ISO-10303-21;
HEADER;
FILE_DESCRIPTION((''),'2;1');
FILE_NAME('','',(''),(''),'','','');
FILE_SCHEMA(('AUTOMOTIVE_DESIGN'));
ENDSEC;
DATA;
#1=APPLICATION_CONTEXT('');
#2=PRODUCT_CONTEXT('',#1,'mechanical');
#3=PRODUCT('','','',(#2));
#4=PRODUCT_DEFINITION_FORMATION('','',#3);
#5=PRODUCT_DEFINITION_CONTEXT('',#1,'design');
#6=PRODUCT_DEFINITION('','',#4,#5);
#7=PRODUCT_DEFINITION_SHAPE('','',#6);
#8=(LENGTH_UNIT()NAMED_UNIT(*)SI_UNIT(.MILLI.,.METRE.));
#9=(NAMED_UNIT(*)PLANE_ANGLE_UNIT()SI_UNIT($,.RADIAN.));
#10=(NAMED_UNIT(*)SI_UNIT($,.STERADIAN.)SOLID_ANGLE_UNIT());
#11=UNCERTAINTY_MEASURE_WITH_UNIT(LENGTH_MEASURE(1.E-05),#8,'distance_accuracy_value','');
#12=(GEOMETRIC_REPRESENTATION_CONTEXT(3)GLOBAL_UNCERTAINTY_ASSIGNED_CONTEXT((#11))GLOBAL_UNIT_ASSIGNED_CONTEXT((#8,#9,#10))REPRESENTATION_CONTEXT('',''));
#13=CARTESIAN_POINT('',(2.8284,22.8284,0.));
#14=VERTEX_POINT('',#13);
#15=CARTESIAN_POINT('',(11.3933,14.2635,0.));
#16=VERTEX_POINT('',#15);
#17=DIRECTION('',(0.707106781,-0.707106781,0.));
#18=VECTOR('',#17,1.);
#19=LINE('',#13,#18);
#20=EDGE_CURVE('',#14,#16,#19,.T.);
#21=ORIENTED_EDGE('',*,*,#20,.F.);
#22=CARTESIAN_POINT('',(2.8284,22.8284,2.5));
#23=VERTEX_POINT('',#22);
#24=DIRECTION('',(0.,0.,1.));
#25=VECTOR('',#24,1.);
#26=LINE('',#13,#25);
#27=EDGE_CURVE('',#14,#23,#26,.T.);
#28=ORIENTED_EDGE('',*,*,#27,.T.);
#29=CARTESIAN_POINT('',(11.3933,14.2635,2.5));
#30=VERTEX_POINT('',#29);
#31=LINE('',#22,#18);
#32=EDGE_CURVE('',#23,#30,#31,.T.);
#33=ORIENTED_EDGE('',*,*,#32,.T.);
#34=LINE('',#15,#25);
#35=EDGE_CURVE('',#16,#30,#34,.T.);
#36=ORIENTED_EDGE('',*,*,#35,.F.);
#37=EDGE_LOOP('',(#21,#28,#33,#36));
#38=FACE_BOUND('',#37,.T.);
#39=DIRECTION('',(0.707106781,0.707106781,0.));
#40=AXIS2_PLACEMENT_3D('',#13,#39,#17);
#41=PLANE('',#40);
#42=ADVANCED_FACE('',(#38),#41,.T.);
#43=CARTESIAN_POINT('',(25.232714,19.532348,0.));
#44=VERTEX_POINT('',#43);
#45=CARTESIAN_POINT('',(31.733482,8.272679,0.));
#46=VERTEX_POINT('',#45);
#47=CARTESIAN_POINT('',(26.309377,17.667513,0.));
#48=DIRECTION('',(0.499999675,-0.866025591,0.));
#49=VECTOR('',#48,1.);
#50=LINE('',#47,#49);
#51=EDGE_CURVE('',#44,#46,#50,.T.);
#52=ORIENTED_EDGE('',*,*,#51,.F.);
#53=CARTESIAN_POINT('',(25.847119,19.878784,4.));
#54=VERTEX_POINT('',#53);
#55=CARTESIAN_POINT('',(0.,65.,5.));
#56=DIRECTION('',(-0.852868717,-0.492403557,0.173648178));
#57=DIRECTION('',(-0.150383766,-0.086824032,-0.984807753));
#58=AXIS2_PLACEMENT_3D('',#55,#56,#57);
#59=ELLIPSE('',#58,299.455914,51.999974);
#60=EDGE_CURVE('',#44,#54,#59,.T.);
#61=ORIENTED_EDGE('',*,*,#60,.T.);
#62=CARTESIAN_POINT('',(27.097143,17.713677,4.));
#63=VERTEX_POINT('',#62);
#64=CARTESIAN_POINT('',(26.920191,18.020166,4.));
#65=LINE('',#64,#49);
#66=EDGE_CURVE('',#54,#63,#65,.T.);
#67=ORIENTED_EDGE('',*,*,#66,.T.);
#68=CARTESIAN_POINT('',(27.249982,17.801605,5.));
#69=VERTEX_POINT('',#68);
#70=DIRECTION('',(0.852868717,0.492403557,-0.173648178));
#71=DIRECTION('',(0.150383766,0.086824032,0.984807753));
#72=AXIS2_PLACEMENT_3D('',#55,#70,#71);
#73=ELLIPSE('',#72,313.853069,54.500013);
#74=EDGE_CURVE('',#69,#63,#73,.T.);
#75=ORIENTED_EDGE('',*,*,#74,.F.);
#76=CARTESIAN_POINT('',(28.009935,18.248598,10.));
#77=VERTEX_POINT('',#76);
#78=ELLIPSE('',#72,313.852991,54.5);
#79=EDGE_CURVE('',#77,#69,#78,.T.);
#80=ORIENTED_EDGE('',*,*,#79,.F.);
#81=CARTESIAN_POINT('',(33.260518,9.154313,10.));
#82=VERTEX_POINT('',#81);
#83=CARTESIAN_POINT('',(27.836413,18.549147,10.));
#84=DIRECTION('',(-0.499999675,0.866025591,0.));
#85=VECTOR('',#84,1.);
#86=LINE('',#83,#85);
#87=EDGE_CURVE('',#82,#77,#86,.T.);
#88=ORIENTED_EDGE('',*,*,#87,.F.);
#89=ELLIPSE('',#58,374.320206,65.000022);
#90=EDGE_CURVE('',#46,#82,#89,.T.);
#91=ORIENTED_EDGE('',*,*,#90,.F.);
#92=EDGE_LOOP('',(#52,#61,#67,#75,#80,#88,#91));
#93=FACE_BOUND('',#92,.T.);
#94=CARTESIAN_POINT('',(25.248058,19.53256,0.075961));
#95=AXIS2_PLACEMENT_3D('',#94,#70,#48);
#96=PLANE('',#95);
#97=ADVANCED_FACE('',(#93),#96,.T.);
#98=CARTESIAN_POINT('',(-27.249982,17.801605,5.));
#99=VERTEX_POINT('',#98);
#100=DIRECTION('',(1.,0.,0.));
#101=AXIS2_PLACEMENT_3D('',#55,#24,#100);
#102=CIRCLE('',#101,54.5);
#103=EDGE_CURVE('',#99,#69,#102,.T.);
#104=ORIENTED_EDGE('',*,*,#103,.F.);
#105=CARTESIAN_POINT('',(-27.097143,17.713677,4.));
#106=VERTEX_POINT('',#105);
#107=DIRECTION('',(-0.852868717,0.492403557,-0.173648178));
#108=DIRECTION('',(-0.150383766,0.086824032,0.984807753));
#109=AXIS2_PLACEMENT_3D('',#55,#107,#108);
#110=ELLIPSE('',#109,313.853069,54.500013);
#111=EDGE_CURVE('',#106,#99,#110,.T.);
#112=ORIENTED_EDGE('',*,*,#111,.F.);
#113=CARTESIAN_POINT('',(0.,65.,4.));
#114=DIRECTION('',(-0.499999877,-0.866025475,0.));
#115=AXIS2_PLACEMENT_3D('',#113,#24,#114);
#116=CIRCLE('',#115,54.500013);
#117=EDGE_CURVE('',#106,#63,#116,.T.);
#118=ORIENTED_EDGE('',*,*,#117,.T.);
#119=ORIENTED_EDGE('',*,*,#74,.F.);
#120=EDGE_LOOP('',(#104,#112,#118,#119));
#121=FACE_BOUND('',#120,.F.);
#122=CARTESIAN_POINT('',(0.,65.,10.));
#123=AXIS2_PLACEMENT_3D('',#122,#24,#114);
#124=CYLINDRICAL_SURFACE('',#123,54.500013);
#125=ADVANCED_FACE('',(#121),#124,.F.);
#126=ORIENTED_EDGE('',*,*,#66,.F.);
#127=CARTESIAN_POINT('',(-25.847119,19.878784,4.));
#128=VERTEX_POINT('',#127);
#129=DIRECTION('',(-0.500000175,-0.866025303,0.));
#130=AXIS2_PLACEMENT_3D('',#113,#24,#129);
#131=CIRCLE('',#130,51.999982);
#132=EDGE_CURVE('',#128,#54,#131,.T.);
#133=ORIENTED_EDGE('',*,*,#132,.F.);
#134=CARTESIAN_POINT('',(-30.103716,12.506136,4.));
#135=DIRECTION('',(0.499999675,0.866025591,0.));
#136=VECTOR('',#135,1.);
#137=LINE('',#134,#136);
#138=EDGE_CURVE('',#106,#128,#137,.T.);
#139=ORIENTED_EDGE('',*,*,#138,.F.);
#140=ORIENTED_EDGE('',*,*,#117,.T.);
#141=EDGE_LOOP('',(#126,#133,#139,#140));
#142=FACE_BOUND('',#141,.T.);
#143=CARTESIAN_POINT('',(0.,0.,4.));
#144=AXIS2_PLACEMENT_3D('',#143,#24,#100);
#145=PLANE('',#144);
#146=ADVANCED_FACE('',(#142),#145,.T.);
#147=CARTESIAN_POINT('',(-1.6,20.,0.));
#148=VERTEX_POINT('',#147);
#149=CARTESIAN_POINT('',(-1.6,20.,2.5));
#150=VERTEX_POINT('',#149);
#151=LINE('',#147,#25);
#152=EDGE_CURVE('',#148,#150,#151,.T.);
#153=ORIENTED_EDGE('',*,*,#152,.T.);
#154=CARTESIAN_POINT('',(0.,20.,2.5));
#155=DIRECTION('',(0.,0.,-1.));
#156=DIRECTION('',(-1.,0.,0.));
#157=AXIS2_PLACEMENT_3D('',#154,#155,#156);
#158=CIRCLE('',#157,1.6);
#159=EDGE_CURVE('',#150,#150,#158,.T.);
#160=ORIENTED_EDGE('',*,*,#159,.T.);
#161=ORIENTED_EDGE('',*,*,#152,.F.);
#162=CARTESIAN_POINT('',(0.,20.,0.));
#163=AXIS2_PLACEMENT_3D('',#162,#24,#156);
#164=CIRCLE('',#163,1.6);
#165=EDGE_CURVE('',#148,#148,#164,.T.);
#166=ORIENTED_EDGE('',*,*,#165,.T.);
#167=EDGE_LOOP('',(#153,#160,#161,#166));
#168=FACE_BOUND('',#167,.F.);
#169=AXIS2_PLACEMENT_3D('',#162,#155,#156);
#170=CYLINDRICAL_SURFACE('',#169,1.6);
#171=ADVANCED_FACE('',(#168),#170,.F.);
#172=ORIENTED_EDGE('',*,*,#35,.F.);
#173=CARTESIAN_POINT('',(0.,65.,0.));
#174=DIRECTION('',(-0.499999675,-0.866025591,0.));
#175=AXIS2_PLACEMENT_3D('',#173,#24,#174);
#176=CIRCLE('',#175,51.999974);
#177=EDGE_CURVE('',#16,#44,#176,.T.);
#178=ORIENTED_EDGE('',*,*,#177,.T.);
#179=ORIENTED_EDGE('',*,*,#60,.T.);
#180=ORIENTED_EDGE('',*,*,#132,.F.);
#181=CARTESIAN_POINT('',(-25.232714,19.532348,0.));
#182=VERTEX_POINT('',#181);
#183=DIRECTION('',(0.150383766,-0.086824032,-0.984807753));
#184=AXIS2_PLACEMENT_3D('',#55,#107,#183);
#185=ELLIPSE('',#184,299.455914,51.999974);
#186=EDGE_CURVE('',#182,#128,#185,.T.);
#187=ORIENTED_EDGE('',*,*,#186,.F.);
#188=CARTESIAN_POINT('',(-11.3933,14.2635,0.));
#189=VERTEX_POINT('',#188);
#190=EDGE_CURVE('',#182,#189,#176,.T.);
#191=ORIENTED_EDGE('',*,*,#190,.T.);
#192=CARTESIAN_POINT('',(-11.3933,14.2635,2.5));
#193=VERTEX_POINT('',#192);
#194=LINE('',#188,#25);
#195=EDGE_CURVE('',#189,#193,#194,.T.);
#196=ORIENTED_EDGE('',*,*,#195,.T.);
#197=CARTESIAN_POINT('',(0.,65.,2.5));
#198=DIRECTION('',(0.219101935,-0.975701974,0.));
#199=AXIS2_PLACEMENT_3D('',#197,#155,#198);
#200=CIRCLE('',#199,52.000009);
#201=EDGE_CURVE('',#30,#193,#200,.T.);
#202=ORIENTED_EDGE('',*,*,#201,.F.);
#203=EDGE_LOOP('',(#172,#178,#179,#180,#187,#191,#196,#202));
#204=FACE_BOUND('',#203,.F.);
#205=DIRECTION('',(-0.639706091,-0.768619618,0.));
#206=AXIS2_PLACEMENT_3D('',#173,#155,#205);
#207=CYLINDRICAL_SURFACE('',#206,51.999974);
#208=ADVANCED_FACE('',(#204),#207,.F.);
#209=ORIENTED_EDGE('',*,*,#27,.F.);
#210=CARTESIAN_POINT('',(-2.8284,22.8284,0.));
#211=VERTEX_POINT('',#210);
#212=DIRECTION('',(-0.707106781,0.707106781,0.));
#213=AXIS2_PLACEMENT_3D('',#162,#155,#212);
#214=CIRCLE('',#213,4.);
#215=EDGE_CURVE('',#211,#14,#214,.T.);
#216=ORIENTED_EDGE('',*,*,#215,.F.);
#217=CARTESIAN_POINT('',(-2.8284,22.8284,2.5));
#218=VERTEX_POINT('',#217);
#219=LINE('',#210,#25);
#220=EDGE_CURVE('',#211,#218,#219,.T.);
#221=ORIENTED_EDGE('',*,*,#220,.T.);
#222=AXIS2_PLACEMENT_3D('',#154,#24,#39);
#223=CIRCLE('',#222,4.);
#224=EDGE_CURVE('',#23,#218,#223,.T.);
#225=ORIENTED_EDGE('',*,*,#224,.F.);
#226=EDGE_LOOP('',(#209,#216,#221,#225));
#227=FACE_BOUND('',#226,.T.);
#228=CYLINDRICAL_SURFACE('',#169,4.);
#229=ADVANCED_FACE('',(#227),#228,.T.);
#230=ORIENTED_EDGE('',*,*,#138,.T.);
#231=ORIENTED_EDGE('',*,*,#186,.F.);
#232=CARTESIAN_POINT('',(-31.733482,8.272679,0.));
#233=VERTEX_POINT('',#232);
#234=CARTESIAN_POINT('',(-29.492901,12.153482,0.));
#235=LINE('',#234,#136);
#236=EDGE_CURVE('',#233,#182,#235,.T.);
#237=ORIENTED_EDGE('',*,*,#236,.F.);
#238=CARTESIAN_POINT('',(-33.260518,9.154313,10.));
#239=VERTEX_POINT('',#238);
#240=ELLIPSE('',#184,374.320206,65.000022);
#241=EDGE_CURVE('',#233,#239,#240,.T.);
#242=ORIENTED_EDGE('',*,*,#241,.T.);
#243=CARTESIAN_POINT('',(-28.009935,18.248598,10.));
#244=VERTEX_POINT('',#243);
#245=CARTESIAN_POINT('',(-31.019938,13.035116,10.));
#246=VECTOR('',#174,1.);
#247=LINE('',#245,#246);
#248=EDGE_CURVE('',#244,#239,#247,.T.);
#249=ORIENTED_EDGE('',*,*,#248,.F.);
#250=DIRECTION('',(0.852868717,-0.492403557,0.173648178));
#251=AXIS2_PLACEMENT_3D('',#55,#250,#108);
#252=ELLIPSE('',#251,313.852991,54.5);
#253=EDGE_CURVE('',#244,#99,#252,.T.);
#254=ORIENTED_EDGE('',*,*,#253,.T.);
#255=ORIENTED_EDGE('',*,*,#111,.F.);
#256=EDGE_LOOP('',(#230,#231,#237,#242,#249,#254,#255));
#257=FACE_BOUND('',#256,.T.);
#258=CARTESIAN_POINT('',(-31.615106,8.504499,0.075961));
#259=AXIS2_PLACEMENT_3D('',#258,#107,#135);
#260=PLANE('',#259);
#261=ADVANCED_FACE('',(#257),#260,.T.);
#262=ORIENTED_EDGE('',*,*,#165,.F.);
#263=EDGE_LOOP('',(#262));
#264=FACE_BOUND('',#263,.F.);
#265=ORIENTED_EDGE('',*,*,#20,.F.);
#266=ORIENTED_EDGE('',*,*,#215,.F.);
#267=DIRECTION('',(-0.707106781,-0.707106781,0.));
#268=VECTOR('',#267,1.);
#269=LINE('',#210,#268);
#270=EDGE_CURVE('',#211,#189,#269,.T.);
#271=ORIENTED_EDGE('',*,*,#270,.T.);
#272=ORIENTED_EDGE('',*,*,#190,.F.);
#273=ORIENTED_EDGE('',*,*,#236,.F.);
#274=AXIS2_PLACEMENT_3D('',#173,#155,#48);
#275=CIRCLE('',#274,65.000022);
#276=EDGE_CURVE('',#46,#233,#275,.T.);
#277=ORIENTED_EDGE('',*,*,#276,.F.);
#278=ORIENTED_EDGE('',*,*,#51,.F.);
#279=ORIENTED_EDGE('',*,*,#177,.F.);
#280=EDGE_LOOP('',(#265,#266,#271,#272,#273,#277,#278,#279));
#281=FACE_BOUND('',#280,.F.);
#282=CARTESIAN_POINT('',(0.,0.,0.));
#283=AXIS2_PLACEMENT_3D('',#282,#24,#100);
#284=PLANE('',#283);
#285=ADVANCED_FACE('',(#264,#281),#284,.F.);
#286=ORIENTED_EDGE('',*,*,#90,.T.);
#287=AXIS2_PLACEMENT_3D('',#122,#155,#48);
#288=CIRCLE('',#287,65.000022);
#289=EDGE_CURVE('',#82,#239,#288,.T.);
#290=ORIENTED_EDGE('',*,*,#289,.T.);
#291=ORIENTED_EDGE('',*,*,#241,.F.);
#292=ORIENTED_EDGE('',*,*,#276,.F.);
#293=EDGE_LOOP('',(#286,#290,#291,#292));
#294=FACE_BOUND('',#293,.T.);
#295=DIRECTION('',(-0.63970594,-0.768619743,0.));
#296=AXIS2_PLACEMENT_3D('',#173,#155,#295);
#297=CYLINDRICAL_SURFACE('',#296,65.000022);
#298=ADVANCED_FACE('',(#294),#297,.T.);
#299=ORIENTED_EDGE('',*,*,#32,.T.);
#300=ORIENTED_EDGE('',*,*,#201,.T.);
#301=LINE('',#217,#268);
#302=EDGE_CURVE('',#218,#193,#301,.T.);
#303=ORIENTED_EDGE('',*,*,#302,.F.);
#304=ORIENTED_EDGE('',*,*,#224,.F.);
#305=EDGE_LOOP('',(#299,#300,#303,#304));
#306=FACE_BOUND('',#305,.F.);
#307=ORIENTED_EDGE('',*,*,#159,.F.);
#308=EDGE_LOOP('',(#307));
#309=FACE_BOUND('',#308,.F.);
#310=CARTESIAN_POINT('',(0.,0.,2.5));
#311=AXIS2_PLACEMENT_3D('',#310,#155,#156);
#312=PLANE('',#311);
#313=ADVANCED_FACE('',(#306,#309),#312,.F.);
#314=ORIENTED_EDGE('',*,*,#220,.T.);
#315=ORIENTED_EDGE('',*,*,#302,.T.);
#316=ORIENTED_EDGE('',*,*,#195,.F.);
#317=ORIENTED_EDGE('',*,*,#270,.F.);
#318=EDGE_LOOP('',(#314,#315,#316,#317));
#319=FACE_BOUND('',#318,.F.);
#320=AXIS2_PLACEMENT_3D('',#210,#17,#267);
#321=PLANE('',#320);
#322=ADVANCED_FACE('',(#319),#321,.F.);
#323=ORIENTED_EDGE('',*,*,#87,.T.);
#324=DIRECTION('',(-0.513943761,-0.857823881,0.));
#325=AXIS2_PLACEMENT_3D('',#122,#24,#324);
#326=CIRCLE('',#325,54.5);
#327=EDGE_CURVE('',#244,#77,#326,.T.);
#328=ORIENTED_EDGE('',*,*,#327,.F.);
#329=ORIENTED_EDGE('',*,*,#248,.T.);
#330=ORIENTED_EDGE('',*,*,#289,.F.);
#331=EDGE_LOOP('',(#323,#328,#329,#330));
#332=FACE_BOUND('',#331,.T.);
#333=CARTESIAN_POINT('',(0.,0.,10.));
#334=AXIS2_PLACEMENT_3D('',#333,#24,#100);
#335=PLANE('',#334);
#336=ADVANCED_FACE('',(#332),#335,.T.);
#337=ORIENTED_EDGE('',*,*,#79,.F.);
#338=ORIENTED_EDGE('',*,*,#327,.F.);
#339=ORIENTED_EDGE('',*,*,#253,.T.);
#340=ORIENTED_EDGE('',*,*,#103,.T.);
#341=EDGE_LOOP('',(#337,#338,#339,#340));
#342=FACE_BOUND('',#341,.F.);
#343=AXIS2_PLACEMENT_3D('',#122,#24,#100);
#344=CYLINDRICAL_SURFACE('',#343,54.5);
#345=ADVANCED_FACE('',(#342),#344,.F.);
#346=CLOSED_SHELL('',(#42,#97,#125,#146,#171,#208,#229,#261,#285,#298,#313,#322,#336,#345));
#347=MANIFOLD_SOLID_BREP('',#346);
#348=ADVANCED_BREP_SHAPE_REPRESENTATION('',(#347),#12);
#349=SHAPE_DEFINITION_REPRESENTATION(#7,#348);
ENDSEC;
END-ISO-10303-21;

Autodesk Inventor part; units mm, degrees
ref_plane "YZ Plane" through (0, 0, 0) normal (1, 0, 0) x (0, 1, 0)
ref_plane "XZ Plane" through (0, 0, 0) normal (0, 1, 0) x (-1, 0, 0)
ref_plane "XY Plane" through (0, 0, 0) normal (0, 0, 1) x (1, 0, 0)
sketch "Эскиз1" plane through (0, 0, 0) normal (0, 0, 1) x (1, 0, 0)
  line L0 (-19.4221, 3.2482) -> (-17.0252, 13.9839) projected
  line L1 (17.0252, 13.9839) -> (19.4221, 3.2482) projected
  arc A0 (-41.5809, 15.0397) -> (41.5809, 15.0397) centre (0, 65) ccw projected
  line L2 (41.5809, 15.0397) -> (33.2647, 25.0318) projected
  arc A1 (-33.2647, 25.0318) -> (33.2647, 25.0318) centre (0, 65) ccw projected
  line L3 (-33.2647, 25.0318) -> (-41.5809, 15.0397) projected
  line L4 (-5.5, 11.5) -> (-5.5, 0.5) projected
  line L5 (5.5, 0.5) -> (5.5, 11.5) projected
  circle A2 centre (0, 65) radius 65
  circle A3 centre (0, 65) radius 52
  line L6 (-41.5809, 15.0397) -> (-33.2647, 25.0318)
  line L7 (20.5764, 3.3428) -> (0, 65)
  line L8 (-41.5809, 15.0397) -> (0, 65)
  line L9 (0, 65) -> (21.1137, 3.5247)
  line L10 (-32.5, 8.7083) -> (0, 65)
  line L11 (0, 65) -> (32.5, 8.7083)
  line L12 (0, 65) -> (0, 0)
  arc A4 (-39.7976, 13.9446) -> (-45.7382, 14.0977) centre (-42.8715, 10.0011) ccw projected
  line L13 (-45.7382, 14.0977) -> (-66.813, -0.6503) projected
  line L14 (-66.813, -0.6503) -> (-66.8135, -2.4814) projected
  line L15 (-66.8135, -2.4814) -> (-61.8135, -2.4828) projected
  line L16 (-61.8135, -2.4828) -> (-61.8127, 0.4976) projected
  arc A5 (-61.386, 1.3167) -> (-61.8127, 0.4976) centre (-60.8127, 0.4974) ccw projected
  line L17 (-61.386, 1.3167) -> (-46.2094, 11.9372) projected
  arc A6 (-40.3216, 11.8247) -> (-46.2094, 11.9372) centre (-43.3426, 7.8406) ccw projected
  arc A7 (-40.3216, 11.8247) -> (-21.0718, 1.6801) centre (0, 65) ccw projected
  line L18 (-21.0718, 1.6801) -> (-20.6332, 3.6423) projected
  arc A8 (-39.7976, 13.9446) -> (-20.6332, 3.6423) centre (0, 65) ccw projected
  circle A9 centre (0, 65) radius 64.7341
  arc A10 (-42.6225, 16.2781) -> (-20.6332, 3.6423) centre (0, 65) ccw projected
  line L19 (-42.6225, 16.2781) -> (0, 65)
  point P0 (0, 0)
  point P1 (0, 13)
  point P2 (-26, 19.9667)
  point P3 (-32.5, 8.7083)
  point P4 (32.5, 8.7083)
  point P5 (26, 19.9667)
  dimension "d23" = 0.5
  dimension "d25" = 60
  dimension "d26" = 30
  dimension "d42" = 60.135
extrude "Выдавливание1" add sketch "Эскиз1" along normal blind 10 contours L7 A9 L1 | L7 A1 L9 A9 | L1 A9 L12 A1 L7 | A9 L7 A0 L12 | A9 L9 A0 L7 | A9 L11 A0 L9 | L9 A1 L11 A9 | L12 A9 A8 L10 A1 | L12 A0 L18 A9 | A0 L10 A8 L18
sketch "Эскиз4" plane through (0, 0, 10) normal (0, 0, 1) x (1, 0, 0)
  arc A0 (-13.3607, 13.1952) -> (-9.9415, 12.4318) centre (0, 65) ccw projected
  circle A1 centre (0, 65) radius 53.5
  circle A2 centre (0, 65) radius 54.5
  line L0 (-26, 19.9667) -> (-32.5, 8.7083) projected
  arc A3 (-26, 19.9667) -> (-22.4589, 18.1001) centre (0, 65) ccw projected
  arc A4 (-26, 19.9667) -> (26, 19.9667) centre (0, 65) ccw projected
  arc A5 (22.4589, 18.1001) -> (26, 19.9667) centre (0, 65) ccw projected
  line L1 (32.5, 8.7083) -> (26, 19.9667) projected
  point P0 (0, 0)
  point P1 (-27.25, 17.8016)
  point P2 (27.25, 17.8016)
  dimension "d43" = 1
extrude "Выдавливание4" cut sketch "Эскиз4" against normal blind 5 contours A1 L0 A3 A4 L1 A0 | A0 A1 L1 A2 L0
draft "НаклГрань1" angle 10 pull direction (0, 0, -1) faces at (-30.75, 11.7394, 5) fixed edges at (-26.625, 18.8841, 5)
draft "НаклГрань2" angle 10 pull direction (0, 0, -1) faces at (30.75, 11.7394, 5) fixed edges at (26.625, 18.8841, 5)
sketch "Эскиз5" plane through (0, 0, 10) normal (0, 0, 1) x (1, 0, 0)
  arc A0 (-26, 19.9667) -> (26, 19.9667) centre (0, 65) ccw projected
  line L0 (-27.25, 17.8016) -> (-26, 19.9667) projected
  arc A1 (-27.25, 17.8016) -> (27.25, 17.8016) centre (0, 65) ccw projected
  line L1 (26, 19.9667) -> (27.25, 17.8016) projected
  point P0 (0, 0)
extrude "Выдавливание5" cut sketch "Эскиз5" against normal blind 6
sketch "Эскиз6" plane through (0, 0, 0) normal (0, 0, -1) x (-1, 0, 0)
  line L0 (-31.7335, 8.2727) -> (-25.2327, 19.5323) projected
  arc A0 (-25.2327, 19.5323) -> (25.2327, 19.5323) centre (0, 65) ccw projected
  arc A1 (-31.7335, 8.2727) -> (31.7335, 8.2727) centre (0, 65) ccw projected
  line L1 (25.2327, 19.5323) -> (31.7335, 8.2727) projected
  circle A2 centre (0, 20) radius 1.925 projected
  circle A3 centre (0, 20) radius 4 projected
  circle A4 centre (0, 20) radius 1.6
  circle A5 centre (0, 20) radius 4
  line L2 (-2.8284, 22.8284) -> (-11.3933, 14.2635)
  line L3 (2.8284, 22.8284) -> (11.3933, 14.2635)
  line L4 (0, 89.6007) -> (0, 9.3033) projected
  point P0 (0, 0)
  dimension "d50" = 3.2
  dimension "d51" = 8
  dimension "d52" = 45
  dimension "d53" = 45
extrude "Выдавливание6" add sketch "Эскиз6" against normal blind 2.5 contours L2 A3 L4 A0 | L4 A3 L3 A0 | A3 L4 A2 | L4 A2 A3 | L4 A4 A2 | A2 L4 A4
equation "\"d26\" = 0.5 * d25"
properties part number "vzuh_karetka"
